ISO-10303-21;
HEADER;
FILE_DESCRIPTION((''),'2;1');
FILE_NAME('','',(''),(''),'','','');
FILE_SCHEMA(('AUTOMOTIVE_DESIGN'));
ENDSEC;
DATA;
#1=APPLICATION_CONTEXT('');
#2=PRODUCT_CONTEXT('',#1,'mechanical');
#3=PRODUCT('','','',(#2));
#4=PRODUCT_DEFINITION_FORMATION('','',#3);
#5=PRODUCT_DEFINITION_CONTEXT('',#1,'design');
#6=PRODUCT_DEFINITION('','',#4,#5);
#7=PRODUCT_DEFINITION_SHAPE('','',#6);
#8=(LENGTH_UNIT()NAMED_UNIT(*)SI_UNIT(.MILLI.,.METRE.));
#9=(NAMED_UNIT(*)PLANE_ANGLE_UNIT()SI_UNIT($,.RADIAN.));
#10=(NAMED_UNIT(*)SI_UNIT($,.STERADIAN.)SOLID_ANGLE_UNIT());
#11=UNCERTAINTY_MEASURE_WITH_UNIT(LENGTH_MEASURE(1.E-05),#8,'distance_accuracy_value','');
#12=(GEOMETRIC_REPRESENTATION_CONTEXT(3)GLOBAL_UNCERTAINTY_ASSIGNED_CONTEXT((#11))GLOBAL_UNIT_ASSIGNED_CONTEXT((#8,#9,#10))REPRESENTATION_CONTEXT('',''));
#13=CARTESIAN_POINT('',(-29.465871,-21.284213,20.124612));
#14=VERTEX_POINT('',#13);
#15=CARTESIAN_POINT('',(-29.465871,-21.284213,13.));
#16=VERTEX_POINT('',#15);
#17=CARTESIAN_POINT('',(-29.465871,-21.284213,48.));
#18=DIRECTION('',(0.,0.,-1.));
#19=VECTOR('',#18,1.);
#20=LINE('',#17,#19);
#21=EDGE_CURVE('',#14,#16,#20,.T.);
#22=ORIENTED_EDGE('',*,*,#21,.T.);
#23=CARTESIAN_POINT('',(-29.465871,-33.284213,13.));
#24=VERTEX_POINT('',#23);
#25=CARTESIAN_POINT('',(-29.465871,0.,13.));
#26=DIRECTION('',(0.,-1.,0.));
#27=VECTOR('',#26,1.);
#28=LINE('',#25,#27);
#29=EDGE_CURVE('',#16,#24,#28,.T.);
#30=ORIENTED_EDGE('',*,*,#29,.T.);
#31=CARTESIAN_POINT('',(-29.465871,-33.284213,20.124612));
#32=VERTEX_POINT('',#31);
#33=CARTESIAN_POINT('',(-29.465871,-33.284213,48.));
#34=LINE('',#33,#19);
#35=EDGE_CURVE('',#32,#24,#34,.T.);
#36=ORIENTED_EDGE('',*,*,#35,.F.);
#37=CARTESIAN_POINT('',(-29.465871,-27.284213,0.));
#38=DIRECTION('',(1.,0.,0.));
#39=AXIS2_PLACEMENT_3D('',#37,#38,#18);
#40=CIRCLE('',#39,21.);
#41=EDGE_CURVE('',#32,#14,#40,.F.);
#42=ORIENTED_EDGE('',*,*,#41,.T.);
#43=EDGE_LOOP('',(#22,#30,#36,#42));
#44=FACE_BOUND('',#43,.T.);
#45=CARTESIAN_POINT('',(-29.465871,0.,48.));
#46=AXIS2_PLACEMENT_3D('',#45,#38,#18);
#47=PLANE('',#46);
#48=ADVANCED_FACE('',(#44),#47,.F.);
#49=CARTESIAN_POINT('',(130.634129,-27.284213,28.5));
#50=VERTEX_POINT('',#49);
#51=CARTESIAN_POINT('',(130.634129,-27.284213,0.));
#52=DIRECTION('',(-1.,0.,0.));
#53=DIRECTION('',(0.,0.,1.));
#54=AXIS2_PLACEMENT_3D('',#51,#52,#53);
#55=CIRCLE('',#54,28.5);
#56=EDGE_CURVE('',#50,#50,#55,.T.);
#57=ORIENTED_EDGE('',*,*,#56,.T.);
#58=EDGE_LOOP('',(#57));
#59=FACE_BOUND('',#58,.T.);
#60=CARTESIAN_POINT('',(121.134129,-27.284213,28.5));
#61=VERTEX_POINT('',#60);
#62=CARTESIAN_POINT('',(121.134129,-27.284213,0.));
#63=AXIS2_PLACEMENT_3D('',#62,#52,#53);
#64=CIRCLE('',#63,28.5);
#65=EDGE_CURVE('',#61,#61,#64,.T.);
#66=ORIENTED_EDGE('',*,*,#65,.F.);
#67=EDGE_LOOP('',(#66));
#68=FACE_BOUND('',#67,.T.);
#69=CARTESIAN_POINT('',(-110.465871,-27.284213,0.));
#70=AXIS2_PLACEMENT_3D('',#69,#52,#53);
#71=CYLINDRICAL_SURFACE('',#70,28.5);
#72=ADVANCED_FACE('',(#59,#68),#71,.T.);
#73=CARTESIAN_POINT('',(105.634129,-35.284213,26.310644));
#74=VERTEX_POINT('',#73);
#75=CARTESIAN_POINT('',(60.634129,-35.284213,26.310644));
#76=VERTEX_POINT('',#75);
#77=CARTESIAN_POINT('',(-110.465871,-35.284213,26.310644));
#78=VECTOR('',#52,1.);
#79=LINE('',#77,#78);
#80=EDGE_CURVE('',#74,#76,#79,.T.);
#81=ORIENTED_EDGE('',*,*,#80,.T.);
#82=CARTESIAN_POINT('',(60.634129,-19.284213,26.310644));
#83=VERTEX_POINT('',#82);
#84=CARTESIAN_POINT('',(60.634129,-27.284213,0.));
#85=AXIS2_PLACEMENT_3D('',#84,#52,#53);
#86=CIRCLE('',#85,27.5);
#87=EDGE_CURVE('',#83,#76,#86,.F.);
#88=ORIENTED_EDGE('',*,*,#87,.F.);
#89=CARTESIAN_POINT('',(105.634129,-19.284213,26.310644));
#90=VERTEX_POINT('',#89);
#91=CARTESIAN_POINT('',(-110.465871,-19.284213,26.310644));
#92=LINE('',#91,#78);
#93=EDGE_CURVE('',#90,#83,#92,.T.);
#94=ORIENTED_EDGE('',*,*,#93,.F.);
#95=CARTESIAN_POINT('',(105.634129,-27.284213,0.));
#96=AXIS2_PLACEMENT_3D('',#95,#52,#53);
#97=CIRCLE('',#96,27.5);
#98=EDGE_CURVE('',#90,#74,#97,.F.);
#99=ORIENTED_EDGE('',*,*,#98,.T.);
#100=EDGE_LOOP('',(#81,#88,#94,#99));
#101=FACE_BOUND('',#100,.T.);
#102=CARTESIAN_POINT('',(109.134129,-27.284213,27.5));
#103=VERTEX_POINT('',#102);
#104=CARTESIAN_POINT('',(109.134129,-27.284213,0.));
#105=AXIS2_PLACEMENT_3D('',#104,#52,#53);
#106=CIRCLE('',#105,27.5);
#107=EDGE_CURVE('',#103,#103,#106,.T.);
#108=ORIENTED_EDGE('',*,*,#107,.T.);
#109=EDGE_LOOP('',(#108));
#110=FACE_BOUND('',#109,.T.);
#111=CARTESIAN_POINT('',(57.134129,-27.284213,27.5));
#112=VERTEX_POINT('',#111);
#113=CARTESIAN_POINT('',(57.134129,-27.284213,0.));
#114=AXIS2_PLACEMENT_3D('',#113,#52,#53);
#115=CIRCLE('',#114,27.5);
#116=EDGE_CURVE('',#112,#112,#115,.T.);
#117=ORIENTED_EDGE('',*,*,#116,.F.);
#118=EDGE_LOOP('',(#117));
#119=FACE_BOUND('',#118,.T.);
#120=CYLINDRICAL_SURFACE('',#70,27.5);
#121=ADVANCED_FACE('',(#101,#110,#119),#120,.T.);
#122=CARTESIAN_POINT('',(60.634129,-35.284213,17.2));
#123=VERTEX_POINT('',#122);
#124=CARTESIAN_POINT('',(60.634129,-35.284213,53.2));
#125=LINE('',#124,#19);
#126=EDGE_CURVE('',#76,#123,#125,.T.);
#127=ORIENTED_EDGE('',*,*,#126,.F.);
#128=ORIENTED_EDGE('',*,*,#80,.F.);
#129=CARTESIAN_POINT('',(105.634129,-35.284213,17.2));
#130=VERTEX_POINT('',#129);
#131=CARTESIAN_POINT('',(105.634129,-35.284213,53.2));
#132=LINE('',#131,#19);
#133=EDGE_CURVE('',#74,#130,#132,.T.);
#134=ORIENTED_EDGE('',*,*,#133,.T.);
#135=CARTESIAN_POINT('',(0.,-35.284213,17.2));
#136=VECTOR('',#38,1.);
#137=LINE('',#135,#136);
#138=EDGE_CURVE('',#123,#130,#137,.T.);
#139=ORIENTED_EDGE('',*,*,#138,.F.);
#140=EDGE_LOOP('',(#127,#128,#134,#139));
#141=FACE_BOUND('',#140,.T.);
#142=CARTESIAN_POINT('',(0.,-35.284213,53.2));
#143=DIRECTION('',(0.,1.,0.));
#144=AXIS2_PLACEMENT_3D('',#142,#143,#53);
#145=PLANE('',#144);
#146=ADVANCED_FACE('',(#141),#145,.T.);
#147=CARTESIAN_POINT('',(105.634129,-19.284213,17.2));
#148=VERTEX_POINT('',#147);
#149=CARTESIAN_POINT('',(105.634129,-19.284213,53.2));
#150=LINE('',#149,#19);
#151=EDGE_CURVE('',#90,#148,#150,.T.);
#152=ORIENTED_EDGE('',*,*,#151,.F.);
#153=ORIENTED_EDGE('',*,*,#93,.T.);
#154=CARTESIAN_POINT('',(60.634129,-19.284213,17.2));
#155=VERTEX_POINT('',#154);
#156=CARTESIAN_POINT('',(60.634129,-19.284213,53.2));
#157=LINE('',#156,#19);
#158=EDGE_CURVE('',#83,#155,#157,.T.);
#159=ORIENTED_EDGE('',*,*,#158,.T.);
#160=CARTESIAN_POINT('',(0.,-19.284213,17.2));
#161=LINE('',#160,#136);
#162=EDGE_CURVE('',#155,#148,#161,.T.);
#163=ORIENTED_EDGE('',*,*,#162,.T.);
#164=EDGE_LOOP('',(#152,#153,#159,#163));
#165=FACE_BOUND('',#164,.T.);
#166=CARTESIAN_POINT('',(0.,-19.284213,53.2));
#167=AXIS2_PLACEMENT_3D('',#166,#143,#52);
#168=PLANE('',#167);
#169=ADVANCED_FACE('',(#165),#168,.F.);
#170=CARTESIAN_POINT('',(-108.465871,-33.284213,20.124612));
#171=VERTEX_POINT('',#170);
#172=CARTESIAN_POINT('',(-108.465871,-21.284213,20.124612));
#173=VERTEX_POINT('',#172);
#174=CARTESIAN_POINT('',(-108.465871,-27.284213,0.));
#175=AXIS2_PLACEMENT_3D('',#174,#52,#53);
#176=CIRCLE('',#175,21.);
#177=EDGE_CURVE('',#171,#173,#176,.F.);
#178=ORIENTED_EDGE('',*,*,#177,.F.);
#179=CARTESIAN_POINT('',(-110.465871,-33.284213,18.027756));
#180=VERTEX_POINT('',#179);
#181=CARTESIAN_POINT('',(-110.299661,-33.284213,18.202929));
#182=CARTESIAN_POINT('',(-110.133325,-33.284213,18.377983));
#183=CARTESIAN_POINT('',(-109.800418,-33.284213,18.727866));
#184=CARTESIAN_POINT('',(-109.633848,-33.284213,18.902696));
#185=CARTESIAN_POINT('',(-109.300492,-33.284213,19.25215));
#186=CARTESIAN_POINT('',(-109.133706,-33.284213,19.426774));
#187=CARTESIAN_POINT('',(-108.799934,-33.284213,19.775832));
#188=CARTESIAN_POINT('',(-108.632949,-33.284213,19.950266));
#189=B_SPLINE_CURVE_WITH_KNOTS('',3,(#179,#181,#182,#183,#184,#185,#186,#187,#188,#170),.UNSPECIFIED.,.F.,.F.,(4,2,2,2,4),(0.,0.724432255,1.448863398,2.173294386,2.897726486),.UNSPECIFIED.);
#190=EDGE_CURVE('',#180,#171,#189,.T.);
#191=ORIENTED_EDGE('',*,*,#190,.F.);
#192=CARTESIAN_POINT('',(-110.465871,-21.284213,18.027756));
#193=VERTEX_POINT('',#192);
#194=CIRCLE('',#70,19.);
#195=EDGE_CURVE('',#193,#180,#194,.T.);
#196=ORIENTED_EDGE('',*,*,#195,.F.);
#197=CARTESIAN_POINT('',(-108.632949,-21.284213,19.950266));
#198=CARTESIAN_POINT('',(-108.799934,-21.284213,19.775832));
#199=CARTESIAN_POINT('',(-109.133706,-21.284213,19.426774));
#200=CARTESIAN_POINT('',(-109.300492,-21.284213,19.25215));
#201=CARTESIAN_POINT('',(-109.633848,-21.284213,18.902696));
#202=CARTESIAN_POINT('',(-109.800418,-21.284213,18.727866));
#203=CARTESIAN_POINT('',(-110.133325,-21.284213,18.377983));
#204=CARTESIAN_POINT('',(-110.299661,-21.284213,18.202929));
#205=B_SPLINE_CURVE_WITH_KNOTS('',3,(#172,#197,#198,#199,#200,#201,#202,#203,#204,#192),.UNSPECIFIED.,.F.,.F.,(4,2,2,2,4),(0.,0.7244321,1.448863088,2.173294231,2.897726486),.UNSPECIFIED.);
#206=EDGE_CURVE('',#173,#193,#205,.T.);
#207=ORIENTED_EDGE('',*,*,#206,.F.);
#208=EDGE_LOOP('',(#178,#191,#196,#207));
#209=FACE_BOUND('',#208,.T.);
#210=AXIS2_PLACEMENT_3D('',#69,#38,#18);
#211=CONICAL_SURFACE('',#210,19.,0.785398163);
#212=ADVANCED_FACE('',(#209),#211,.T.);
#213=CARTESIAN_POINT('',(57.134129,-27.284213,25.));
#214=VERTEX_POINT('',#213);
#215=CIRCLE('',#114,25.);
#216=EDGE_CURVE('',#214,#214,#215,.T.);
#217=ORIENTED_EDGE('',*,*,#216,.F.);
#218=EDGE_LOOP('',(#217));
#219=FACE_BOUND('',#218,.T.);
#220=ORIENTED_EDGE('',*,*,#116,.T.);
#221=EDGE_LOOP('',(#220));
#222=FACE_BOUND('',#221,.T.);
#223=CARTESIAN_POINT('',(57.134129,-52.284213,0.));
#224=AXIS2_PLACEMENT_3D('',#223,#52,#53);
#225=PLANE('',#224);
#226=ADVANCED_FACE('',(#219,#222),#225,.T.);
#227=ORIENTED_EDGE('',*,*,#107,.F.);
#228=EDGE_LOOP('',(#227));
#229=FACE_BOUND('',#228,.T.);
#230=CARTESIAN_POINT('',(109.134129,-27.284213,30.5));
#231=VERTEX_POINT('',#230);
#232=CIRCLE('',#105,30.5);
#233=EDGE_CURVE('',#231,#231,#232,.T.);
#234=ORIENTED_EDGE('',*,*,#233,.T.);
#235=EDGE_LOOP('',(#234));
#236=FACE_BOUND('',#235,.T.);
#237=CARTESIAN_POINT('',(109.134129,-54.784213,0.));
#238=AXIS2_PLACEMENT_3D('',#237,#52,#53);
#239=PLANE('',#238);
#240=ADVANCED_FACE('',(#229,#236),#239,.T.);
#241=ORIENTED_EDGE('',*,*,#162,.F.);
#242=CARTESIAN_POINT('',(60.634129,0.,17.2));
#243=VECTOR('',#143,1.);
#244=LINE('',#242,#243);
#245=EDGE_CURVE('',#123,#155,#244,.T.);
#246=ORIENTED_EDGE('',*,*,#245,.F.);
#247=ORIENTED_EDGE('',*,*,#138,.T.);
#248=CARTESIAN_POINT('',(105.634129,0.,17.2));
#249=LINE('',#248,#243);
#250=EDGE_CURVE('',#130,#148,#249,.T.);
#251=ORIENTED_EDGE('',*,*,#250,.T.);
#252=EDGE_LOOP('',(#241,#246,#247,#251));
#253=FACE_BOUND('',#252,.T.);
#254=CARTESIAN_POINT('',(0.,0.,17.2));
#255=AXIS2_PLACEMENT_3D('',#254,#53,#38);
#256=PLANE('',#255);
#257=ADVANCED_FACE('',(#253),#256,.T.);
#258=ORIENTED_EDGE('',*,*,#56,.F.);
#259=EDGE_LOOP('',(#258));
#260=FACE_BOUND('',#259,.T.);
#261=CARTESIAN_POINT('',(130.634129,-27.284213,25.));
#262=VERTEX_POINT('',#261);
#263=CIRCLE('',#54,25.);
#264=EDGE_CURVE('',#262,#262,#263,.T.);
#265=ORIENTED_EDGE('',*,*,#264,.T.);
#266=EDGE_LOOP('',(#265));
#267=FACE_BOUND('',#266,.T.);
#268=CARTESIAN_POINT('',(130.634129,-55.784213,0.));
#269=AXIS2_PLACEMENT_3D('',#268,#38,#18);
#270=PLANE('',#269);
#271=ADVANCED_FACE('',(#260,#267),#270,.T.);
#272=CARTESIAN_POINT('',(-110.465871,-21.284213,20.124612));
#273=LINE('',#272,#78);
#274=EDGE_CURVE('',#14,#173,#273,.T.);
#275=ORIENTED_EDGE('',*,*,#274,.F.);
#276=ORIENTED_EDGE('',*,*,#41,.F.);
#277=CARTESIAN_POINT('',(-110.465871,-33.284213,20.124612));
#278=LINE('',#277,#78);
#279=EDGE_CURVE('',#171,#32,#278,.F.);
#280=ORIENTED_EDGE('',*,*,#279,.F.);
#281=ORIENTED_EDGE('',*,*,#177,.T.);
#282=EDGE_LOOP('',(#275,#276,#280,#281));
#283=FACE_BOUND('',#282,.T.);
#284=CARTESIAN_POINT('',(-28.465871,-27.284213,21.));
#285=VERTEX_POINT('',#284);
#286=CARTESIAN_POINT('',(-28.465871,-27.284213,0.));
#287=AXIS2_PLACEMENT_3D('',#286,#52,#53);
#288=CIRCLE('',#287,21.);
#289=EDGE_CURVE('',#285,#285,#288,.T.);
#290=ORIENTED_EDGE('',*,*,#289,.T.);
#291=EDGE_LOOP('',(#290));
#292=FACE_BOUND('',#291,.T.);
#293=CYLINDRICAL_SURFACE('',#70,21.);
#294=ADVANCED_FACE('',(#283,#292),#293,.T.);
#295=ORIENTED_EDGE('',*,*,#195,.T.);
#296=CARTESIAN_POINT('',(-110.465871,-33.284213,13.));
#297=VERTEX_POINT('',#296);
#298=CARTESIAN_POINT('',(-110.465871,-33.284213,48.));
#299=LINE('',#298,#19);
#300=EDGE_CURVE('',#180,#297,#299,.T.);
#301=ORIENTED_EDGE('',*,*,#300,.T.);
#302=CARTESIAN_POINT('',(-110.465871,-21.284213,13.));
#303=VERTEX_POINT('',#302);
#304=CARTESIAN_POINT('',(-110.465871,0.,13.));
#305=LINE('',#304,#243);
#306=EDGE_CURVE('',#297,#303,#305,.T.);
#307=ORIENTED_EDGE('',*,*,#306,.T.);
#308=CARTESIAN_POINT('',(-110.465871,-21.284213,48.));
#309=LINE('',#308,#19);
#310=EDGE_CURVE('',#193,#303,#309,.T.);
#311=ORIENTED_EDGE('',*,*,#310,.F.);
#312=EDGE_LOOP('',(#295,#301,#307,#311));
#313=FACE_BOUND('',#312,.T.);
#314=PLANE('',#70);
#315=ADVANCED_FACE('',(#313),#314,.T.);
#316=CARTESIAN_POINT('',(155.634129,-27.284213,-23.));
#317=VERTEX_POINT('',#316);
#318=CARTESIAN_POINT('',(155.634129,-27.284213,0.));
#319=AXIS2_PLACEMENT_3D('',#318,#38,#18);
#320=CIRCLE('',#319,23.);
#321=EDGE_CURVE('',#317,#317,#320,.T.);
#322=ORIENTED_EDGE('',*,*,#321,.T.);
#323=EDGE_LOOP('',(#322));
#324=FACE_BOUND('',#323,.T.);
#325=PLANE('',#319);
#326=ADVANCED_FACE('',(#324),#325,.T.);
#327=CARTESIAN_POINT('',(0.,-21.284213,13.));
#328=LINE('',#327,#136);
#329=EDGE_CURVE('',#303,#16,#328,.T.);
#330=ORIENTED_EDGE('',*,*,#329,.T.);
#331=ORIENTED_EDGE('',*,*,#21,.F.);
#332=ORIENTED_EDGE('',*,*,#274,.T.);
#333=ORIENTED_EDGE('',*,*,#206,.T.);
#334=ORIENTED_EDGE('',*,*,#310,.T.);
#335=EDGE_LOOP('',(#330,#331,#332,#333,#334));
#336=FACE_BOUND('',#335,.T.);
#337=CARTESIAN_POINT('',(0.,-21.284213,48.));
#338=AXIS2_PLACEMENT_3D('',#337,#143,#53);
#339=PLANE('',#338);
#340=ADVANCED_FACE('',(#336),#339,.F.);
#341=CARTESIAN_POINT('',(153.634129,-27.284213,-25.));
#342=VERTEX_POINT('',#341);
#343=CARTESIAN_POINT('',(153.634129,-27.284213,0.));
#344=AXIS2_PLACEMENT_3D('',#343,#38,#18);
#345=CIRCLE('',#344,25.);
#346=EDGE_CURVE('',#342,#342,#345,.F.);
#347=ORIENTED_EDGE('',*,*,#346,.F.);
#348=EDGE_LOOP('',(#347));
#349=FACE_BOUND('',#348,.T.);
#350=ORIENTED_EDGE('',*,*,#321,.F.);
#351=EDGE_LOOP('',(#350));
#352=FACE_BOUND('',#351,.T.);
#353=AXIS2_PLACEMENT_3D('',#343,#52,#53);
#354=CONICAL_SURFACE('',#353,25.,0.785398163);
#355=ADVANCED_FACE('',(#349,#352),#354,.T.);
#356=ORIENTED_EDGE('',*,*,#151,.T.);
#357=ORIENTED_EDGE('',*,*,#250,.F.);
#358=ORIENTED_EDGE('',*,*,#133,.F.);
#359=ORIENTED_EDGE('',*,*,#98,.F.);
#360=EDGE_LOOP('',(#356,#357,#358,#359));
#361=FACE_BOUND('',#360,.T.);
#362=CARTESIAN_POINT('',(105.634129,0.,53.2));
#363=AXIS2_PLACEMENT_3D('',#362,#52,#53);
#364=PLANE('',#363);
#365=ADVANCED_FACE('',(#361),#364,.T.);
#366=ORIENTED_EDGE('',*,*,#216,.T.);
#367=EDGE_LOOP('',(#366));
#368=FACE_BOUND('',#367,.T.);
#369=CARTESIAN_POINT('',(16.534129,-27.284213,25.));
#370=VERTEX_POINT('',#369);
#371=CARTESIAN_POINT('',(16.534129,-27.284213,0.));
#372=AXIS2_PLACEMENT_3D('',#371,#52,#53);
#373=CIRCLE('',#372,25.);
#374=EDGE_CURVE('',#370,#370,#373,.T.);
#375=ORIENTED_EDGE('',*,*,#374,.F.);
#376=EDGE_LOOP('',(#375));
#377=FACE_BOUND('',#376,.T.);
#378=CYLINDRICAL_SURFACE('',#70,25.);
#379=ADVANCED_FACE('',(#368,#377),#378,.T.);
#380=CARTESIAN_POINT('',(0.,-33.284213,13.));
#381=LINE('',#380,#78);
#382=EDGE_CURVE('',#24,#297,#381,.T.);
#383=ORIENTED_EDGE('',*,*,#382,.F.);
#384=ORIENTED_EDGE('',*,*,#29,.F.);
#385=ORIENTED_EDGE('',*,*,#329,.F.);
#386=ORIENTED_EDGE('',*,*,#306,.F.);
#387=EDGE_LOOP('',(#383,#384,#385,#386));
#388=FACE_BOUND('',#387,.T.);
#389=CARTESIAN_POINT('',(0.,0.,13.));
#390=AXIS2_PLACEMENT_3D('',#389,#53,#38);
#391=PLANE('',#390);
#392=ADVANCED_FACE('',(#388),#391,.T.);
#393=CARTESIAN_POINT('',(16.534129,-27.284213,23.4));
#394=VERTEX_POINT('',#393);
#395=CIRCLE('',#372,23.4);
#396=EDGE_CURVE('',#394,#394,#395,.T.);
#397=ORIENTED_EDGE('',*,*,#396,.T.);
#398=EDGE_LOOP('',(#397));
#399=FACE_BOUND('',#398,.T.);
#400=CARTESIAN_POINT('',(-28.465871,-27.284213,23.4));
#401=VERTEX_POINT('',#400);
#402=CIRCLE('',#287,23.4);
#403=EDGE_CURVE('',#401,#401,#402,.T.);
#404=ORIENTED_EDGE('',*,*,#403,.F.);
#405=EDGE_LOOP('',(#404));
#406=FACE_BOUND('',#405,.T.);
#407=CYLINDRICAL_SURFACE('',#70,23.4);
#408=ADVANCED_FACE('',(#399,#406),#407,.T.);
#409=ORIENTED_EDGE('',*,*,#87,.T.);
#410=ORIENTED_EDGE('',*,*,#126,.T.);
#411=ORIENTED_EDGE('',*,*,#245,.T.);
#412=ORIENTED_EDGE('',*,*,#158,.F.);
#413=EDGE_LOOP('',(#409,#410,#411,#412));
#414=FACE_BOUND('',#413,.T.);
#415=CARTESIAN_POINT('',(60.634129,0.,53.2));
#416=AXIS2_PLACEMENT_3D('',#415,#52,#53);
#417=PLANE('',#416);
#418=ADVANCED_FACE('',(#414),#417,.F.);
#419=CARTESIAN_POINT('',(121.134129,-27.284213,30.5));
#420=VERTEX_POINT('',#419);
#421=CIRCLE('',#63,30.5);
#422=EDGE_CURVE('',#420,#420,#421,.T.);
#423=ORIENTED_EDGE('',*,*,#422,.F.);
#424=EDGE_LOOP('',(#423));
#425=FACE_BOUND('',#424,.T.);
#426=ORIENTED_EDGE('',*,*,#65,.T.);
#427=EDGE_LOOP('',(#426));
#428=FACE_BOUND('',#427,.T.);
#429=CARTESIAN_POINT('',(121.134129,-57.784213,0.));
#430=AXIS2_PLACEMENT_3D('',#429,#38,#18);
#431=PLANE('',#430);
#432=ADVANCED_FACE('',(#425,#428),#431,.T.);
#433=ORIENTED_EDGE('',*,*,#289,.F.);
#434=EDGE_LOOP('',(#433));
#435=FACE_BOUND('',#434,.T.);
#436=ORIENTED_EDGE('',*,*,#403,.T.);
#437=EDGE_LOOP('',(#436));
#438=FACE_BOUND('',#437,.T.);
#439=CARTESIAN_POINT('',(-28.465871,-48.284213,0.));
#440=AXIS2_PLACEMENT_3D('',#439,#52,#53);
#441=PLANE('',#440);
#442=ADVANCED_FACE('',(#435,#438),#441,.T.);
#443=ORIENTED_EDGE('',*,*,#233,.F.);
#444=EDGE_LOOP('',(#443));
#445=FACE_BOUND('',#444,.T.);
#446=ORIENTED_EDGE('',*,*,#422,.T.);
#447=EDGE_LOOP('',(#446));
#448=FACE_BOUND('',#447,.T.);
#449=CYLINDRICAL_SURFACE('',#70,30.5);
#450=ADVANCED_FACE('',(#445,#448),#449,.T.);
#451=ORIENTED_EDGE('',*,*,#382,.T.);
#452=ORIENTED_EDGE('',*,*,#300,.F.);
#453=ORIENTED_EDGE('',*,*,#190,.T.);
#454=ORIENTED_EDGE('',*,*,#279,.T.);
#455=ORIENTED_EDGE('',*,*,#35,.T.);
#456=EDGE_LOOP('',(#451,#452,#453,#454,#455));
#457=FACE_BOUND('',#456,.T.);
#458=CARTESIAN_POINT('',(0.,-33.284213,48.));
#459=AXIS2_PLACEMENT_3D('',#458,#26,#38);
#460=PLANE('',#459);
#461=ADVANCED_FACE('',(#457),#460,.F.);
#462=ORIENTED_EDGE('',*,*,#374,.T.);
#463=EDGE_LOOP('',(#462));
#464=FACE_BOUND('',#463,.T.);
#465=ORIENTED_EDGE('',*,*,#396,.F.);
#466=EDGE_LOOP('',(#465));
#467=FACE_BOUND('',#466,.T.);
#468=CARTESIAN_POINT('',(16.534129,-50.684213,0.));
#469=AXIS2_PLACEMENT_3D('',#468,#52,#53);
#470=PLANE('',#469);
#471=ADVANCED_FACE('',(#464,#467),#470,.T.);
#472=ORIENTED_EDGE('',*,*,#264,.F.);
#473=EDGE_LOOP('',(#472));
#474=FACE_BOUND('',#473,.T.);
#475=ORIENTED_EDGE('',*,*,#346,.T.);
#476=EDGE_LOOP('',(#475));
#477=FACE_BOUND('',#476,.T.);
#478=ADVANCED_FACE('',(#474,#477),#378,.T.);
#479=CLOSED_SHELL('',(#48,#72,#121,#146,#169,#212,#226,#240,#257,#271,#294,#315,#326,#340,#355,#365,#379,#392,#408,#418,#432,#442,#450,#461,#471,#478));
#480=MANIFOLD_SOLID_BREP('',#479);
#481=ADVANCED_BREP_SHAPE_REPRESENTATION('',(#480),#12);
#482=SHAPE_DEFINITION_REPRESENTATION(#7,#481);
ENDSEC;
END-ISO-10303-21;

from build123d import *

# Parameters (mm, degrees)
CUT_EXTRUDE_START   = 17.2
SKETCH_9_W          = 45
SKETCH_9_H          = 8
CUT_EXTRUDE_1_DEPTH = 36
CUT_EXTRUDE_START_2 = 13
SKETCH_12_W         = 81
SKETCH_12_H         = 6
CUT_EXTRUDE_4_DEPTH = 35
CHAMFER_1_SIZE      = 2


# Read off the part's stored shape, not the designer's step: 旋转3
with BuildPart() as part:
    # 旋转3 outline → 旋转3 (revolve)
    with BuildSketch(Plane(origin=(0, -27.284213334, 0), x_dir=(0, 1, 0), z_dir=(0, 0, -1))):
        Polygon((25, 155.634128986), (0, 155.634128986), (0, -110.465871014), (21, -110.465871014), (21, -28.465871014), (23.4, -28.465871014), (23.4, 16.534128986), (25, 16.534128986), (25, 57.134128986), (27.5, 57.134128986), (27.5, 109.134128986), (30.5, 109.134128986), (30.5, 121.134128986), (28.5, 121.134128986), (28.5, 130.634128986), (25, 130.634128986), align=None)
    revolve(axis=Axis((0, -27.284213334, 0), (1, 0, 0)))

    # 草图9 → 切除-拉伸1 (cut)
    with BuildSketch(Plane.XY.offset(CUT_EXTRUDE_START)):
        with Locations((83.134128986, -23.284213334)):
            Rectangle(SKETCH_9_W, SKETCH_9_H)
        with Locations((83.134128986, -31.284213334)):
            Rectangle(SKETCH_9_W, SKETCH_9_H)
    extrude(amount=CUT_EXTRUDE_1_DEPTH, mode=Mode.SUBTRACT)

    # 草图12 → 切除-拉伸4 (cut)
    with BuildSketch(Plane.XY.offset(CUT_EXTRUDE_START_2)):
        with Locations((-69.965871014, -24.284213334)):
            Rectangle(SKETCH_12_W, SKETCH_12_H)
        with Locations((-69.965871014, -30.284213334)):
            Rectangle(SKETCH_12_W, SKETCH_12_H)
    extrude(amount=CUT_EXTRUDE_4_DEPTH, mode=Mode.SUBTRACT)

    # 倒角1
    chamfer_1_edges = [part.edges().sort_by_distance(p)[0] for p in [
        (-110.465871014, -39.834113732, -16.837458241),
        (155.634128986, -52.284213334, 0),
    ]]
    chamfer(chamfer_1_edges, length=CHAMFER_1_SIZE)


solid = part.part
